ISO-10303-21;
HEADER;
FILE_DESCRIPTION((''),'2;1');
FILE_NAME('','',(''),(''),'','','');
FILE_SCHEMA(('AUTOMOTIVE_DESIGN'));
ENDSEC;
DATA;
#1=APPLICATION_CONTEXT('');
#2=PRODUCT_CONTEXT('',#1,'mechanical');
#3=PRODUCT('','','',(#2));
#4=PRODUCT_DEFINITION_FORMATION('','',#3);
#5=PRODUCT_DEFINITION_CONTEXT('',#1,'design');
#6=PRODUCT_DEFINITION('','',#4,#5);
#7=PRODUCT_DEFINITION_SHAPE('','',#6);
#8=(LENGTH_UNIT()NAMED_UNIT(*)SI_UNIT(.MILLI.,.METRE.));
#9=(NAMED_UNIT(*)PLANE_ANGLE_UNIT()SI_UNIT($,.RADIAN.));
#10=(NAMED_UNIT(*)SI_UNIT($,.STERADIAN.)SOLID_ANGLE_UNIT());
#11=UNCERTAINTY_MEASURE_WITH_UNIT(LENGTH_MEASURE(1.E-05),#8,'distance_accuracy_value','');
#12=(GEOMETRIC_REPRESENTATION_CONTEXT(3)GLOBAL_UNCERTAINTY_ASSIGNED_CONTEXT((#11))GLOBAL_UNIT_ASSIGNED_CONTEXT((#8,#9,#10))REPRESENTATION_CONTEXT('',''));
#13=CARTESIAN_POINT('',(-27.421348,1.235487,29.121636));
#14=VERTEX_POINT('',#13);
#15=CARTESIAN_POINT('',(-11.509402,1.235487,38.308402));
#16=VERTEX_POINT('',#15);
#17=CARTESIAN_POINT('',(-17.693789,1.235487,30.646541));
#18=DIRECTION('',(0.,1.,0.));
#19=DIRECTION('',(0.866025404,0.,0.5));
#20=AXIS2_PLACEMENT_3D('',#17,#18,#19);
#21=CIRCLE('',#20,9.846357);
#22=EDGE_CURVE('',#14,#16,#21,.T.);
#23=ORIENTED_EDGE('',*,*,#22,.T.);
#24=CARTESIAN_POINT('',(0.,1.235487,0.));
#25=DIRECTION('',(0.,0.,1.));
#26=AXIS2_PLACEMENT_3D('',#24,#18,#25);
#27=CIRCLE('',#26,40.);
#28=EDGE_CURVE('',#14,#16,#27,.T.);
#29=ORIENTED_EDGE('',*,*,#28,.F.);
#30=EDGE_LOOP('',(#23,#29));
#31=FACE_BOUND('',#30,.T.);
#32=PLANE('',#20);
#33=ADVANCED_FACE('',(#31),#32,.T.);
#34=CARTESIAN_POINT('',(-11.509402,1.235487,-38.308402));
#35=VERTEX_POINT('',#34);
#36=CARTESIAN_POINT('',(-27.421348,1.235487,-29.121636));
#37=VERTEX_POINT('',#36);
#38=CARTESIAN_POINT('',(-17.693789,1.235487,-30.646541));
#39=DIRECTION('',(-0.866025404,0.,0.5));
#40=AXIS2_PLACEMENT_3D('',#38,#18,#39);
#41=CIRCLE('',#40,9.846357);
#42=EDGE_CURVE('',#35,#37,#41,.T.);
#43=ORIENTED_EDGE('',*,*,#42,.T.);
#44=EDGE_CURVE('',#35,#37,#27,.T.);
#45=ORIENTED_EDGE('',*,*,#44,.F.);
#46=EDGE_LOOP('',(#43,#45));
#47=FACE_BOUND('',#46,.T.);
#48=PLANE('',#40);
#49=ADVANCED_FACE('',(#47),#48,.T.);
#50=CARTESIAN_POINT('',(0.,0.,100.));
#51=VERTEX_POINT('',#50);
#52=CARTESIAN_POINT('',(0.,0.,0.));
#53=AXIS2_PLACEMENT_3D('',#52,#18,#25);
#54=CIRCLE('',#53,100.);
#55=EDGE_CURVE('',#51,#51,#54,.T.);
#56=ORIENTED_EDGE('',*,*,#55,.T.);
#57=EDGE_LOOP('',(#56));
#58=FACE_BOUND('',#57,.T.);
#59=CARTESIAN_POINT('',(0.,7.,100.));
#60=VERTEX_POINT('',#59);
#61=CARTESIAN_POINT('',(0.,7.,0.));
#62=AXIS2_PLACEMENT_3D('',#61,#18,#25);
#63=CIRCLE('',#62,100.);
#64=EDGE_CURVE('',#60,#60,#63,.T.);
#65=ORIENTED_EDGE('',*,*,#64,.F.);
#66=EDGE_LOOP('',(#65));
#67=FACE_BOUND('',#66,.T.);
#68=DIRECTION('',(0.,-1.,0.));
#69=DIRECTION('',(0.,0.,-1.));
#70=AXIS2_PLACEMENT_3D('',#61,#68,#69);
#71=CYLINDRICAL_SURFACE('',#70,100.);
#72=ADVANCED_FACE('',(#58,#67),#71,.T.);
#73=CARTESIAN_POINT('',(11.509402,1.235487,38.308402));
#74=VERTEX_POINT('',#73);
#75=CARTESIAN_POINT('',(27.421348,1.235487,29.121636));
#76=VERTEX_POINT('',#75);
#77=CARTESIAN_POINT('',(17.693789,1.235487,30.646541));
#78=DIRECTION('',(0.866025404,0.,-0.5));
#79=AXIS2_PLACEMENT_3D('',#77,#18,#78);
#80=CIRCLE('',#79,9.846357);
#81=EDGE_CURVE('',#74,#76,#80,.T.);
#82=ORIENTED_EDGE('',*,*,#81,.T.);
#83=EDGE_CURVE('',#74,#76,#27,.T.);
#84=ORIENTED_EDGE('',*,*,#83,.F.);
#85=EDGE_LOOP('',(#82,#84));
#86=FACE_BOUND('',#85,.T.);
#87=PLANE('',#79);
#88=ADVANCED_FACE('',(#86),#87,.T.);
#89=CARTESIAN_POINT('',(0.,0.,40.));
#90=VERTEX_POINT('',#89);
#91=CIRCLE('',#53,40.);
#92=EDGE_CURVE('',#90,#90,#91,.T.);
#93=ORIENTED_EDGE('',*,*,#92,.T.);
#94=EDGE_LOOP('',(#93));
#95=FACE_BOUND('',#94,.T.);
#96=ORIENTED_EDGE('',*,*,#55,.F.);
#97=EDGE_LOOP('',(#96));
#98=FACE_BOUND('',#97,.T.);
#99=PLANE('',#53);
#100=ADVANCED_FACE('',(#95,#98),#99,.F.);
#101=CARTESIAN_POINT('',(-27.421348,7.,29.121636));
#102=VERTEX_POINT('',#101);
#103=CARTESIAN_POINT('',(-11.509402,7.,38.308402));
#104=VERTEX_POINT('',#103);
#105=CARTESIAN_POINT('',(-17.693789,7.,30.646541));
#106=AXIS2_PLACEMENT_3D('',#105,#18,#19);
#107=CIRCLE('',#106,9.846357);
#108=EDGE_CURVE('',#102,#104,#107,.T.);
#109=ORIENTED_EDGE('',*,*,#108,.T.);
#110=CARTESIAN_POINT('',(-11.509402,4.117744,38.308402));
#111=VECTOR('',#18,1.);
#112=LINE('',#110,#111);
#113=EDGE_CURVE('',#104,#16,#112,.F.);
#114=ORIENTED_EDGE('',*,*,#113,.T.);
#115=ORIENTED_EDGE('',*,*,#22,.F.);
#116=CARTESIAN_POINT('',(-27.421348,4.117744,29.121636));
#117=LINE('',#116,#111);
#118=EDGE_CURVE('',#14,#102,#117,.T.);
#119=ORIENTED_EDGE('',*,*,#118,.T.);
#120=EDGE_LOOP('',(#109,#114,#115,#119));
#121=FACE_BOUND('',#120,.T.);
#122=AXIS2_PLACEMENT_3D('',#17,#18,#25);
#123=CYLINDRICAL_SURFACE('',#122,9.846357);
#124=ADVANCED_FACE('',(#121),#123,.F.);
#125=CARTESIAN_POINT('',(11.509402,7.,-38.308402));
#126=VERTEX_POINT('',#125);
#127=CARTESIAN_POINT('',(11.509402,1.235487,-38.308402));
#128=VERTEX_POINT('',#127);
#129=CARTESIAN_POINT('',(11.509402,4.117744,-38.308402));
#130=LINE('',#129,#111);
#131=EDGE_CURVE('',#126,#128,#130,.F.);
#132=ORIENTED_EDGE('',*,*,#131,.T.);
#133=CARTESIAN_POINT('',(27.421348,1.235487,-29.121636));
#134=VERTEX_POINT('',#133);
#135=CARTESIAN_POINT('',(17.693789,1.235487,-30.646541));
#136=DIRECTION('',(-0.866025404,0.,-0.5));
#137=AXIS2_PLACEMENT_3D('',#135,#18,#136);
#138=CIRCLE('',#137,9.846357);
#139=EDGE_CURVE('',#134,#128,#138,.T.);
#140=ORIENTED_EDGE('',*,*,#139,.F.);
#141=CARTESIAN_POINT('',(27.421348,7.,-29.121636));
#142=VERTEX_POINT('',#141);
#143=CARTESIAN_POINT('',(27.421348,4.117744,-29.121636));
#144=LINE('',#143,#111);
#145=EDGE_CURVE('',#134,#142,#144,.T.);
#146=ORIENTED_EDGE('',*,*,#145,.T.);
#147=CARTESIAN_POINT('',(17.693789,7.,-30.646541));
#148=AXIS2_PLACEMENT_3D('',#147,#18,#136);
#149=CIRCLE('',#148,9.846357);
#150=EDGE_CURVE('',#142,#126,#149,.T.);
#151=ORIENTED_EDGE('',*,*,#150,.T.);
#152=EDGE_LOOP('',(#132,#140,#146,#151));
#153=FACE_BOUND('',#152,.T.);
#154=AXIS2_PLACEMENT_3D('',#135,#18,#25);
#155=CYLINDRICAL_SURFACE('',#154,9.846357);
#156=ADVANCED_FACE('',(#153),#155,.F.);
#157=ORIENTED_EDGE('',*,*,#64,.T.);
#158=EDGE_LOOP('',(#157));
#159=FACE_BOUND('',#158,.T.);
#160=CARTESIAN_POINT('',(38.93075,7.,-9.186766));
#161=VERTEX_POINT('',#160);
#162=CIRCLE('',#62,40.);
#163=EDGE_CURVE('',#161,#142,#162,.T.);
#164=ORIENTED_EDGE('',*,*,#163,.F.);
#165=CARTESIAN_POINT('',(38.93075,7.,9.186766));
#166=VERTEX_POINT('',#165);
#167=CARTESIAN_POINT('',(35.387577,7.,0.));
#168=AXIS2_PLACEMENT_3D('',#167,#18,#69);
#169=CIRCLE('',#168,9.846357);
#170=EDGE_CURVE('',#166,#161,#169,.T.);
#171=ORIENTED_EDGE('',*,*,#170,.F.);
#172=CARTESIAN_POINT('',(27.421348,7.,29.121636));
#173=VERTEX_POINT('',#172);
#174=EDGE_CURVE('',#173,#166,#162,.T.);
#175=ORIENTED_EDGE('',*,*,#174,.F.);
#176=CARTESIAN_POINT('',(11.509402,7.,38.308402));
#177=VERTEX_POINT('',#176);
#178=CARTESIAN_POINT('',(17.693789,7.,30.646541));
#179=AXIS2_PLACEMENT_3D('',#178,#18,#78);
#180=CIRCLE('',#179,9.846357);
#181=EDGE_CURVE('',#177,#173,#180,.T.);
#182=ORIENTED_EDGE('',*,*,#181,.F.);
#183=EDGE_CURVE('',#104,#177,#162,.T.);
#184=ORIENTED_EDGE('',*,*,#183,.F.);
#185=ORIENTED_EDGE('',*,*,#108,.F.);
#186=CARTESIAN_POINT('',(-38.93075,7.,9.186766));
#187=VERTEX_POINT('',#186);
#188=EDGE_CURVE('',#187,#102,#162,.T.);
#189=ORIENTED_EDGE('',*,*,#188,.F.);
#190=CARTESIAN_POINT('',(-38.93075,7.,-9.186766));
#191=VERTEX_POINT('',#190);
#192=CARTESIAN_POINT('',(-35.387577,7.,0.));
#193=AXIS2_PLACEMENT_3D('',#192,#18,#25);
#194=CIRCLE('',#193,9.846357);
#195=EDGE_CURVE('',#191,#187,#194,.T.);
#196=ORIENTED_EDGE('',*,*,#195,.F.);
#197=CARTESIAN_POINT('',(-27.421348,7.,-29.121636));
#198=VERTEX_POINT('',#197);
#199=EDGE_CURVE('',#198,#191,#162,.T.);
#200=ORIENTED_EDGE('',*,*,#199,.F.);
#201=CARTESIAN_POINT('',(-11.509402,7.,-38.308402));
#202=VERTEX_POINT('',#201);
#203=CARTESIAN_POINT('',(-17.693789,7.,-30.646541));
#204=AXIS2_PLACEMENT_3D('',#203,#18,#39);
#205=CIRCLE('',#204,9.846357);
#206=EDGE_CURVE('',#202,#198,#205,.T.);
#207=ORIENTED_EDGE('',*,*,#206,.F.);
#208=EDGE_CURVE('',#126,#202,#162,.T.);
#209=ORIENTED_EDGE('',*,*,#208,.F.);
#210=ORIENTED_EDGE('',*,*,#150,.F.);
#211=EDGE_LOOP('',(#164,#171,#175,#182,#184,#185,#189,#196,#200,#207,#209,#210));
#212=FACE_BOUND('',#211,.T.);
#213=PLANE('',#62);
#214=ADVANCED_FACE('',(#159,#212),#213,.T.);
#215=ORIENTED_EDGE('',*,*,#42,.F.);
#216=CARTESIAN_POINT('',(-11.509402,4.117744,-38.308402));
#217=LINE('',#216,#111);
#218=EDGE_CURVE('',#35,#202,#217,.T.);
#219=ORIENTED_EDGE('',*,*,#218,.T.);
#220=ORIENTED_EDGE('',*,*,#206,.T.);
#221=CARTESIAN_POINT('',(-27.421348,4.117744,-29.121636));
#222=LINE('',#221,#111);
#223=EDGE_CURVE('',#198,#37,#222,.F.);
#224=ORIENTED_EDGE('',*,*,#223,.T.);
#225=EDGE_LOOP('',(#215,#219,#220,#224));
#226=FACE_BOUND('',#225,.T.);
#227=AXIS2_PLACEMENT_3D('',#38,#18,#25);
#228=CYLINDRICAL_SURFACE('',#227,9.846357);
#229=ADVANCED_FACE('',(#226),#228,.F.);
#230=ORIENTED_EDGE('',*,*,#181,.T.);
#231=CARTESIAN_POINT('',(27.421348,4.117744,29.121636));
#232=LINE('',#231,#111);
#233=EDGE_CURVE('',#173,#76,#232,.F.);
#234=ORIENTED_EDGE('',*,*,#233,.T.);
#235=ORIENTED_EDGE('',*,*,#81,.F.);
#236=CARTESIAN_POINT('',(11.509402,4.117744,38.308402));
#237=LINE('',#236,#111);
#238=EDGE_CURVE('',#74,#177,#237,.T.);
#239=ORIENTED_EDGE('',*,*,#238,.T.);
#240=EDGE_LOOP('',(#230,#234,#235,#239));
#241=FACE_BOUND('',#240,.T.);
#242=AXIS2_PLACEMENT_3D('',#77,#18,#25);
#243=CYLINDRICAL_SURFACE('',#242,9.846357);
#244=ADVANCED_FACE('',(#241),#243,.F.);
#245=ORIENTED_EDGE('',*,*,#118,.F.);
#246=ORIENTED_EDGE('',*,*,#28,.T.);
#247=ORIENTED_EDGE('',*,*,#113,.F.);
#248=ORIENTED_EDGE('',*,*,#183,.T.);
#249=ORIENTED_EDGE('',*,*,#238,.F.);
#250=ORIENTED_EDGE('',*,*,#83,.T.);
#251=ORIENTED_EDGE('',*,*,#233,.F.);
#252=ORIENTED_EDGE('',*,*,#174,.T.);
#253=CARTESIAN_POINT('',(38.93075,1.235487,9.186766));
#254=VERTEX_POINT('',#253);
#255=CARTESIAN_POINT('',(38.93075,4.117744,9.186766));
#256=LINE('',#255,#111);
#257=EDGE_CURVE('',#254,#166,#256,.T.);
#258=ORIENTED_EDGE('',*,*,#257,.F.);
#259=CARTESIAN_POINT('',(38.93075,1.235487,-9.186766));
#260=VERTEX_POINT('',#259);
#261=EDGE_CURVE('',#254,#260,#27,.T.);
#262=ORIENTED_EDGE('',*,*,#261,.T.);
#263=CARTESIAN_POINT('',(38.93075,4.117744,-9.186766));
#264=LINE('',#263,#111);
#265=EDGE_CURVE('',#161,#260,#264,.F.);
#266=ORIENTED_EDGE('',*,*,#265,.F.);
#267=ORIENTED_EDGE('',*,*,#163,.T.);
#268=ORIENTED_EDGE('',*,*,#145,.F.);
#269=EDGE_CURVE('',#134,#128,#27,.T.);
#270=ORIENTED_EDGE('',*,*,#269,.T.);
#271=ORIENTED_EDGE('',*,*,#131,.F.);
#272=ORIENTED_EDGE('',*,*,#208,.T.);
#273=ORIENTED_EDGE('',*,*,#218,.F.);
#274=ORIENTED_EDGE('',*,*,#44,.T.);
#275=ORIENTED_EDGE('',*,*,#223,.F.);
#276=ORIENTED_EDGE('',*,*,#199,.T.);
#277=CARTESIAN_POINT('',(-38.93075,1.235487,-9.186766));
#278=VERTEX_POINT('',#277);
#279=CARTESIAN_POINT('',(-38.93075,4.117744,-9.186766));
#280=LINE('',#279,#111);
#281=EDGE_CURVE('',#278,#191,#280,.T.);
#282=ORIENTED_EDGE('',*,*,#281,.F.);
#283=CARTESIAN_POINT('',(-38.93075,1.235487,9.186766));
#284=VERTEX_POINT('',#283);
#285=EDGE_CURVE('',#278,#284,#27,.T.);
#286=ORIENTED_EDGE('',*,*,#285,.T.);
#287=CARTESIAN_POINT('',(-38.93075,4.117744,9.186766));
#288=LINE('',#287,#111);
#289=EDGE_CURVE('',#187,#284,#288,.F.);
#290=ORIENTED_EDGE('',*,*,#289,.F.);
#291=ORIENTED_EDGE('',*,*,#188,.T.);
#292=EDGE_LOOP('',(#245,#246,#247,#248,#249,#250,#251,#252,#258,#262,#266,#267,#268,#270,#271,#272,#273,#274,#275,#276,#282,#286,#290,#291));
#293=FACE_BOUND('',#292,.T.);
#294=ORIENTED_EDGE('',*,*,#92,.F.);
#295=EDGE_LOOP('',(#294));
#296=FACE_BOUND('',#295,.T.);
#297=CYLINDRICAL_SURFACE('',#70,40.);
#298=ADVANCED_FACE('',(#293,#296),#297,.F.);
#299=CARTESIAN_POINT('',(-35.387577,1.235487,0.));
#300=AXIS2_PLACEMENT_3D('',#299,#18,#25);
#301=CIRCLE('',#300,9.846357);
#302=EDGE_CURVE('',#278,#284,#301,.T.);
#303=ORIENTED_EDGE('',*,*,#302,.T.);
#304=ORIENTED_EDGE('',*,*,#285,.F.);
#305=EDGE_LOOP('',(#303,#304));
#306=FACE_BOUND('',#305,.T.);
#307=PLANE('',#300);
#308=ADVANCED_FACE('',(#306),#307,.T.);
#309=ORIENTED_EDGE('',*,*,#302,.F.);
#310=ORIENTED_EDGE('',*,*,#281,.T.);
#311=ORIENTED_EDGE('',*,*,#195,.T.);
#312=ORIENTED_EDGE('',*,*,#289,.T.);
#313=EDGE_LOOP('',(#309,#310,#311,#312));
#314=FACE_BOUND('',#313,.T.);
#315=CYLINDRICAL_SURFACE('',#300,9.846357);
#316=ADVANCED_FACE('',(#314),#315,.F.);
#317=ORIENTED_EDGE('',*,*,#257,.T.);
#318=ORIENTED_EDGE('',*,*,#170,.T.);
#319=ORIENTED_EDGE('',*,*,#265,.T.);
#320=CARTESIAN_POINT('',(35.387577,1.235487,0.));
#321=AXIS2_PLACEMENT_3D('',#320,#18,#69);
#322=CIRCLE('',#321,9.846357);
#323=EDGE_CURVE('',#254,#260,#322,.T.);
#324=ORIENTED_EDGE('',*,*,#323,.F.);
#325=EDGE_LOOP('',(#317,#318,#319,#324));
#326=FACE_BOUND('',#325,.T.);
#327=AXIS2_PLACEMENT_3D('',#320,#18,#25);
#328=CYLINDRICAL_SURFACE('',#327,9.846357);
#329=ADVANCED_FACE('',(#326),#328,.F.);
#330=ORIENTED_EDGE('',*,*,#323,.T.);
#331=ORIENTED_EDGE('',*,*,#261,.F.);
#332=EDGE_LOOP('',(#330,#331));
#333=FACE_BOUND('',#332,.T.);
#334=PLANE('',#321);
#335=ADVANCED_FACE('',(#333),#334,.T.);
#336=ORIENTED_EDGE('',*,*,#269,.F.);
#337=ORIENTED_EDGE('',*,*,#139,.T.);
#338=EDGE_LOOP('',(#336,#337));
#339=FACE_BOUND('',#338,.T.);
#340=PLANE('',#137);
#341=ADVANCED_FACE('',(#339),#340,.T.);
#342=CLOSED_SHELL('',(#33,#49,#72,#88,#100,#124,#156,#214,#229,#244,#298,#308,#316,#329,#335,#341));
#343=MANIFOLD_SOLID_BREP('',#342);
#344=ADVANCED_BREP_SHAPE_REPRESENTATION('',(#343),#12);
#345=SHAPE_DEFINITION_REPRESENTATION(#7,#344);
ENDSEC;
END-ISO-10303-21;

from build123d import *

# Parameters (mm, degrees)
SKETCH1_R           = 100
BOSS_EXTRUDE1_DEPTH = 7
SKETCH2_R           = 40
CUT_EXTRUDE1_DEPTH  = 142.594491418
SKETCH3_R           = 9.846356897
CUT_EXTRUDE2_DEPTH  = 5.764512728
CIRPATTERN1_COUNT   = 6


with BuildPart() as part:
    # Sketch1 → Boss-Extrude1 (new body)
    with BuildSketch(Plane(origin=(0, 0, 0), x_dir=(1, 0, 0), z_dir=(0, 1, 0))):
        Circle(SKETCH1_R)
    extrude(amount=BOSS_EXTRUDE1_DEPTH)

    # Sketch2 → Cut-Extrude1 (cut, through all)
    with BuildSketch(Plane(origin=(0, 0, 0), x_dir=(1, 0, 0), z_dir=(0, 1, 0))):
        Circle(SKETCH2_R)
    extrude(amount=CUT_EXTRUDE1_DEPTH, mode=Mode.SUBTRACT)

    # Sketch3 → Cut-Extrude2 (cut)
    with BuildSketch(Plane(origin=(0, 7, 0), x_dir=(1, 0, 0), z_dir=(0, 1, 0))):
        with Locations((-35.387577494, 0)):
            Circle(SKETCH3_R)
    cut_extrude2 = extrude(amount=-CUT_EXTRUDE2_DEPTH, mode=Mode.SUBTRACT)

    # CirPattern1: Cut-Extrude2 ×6 about axis
    cirpattern1_axis = Axis((0, 0, 0), (0, 1, 0))
    for i in range(1, CIRPATTERN1_COUNT):
        add(cut_extrude2.rotate(cirpattern1_axis, i * 360 / CIRPATTERN1_COUNT), mode=Mode.SUBTRACT)


solid = part.part
